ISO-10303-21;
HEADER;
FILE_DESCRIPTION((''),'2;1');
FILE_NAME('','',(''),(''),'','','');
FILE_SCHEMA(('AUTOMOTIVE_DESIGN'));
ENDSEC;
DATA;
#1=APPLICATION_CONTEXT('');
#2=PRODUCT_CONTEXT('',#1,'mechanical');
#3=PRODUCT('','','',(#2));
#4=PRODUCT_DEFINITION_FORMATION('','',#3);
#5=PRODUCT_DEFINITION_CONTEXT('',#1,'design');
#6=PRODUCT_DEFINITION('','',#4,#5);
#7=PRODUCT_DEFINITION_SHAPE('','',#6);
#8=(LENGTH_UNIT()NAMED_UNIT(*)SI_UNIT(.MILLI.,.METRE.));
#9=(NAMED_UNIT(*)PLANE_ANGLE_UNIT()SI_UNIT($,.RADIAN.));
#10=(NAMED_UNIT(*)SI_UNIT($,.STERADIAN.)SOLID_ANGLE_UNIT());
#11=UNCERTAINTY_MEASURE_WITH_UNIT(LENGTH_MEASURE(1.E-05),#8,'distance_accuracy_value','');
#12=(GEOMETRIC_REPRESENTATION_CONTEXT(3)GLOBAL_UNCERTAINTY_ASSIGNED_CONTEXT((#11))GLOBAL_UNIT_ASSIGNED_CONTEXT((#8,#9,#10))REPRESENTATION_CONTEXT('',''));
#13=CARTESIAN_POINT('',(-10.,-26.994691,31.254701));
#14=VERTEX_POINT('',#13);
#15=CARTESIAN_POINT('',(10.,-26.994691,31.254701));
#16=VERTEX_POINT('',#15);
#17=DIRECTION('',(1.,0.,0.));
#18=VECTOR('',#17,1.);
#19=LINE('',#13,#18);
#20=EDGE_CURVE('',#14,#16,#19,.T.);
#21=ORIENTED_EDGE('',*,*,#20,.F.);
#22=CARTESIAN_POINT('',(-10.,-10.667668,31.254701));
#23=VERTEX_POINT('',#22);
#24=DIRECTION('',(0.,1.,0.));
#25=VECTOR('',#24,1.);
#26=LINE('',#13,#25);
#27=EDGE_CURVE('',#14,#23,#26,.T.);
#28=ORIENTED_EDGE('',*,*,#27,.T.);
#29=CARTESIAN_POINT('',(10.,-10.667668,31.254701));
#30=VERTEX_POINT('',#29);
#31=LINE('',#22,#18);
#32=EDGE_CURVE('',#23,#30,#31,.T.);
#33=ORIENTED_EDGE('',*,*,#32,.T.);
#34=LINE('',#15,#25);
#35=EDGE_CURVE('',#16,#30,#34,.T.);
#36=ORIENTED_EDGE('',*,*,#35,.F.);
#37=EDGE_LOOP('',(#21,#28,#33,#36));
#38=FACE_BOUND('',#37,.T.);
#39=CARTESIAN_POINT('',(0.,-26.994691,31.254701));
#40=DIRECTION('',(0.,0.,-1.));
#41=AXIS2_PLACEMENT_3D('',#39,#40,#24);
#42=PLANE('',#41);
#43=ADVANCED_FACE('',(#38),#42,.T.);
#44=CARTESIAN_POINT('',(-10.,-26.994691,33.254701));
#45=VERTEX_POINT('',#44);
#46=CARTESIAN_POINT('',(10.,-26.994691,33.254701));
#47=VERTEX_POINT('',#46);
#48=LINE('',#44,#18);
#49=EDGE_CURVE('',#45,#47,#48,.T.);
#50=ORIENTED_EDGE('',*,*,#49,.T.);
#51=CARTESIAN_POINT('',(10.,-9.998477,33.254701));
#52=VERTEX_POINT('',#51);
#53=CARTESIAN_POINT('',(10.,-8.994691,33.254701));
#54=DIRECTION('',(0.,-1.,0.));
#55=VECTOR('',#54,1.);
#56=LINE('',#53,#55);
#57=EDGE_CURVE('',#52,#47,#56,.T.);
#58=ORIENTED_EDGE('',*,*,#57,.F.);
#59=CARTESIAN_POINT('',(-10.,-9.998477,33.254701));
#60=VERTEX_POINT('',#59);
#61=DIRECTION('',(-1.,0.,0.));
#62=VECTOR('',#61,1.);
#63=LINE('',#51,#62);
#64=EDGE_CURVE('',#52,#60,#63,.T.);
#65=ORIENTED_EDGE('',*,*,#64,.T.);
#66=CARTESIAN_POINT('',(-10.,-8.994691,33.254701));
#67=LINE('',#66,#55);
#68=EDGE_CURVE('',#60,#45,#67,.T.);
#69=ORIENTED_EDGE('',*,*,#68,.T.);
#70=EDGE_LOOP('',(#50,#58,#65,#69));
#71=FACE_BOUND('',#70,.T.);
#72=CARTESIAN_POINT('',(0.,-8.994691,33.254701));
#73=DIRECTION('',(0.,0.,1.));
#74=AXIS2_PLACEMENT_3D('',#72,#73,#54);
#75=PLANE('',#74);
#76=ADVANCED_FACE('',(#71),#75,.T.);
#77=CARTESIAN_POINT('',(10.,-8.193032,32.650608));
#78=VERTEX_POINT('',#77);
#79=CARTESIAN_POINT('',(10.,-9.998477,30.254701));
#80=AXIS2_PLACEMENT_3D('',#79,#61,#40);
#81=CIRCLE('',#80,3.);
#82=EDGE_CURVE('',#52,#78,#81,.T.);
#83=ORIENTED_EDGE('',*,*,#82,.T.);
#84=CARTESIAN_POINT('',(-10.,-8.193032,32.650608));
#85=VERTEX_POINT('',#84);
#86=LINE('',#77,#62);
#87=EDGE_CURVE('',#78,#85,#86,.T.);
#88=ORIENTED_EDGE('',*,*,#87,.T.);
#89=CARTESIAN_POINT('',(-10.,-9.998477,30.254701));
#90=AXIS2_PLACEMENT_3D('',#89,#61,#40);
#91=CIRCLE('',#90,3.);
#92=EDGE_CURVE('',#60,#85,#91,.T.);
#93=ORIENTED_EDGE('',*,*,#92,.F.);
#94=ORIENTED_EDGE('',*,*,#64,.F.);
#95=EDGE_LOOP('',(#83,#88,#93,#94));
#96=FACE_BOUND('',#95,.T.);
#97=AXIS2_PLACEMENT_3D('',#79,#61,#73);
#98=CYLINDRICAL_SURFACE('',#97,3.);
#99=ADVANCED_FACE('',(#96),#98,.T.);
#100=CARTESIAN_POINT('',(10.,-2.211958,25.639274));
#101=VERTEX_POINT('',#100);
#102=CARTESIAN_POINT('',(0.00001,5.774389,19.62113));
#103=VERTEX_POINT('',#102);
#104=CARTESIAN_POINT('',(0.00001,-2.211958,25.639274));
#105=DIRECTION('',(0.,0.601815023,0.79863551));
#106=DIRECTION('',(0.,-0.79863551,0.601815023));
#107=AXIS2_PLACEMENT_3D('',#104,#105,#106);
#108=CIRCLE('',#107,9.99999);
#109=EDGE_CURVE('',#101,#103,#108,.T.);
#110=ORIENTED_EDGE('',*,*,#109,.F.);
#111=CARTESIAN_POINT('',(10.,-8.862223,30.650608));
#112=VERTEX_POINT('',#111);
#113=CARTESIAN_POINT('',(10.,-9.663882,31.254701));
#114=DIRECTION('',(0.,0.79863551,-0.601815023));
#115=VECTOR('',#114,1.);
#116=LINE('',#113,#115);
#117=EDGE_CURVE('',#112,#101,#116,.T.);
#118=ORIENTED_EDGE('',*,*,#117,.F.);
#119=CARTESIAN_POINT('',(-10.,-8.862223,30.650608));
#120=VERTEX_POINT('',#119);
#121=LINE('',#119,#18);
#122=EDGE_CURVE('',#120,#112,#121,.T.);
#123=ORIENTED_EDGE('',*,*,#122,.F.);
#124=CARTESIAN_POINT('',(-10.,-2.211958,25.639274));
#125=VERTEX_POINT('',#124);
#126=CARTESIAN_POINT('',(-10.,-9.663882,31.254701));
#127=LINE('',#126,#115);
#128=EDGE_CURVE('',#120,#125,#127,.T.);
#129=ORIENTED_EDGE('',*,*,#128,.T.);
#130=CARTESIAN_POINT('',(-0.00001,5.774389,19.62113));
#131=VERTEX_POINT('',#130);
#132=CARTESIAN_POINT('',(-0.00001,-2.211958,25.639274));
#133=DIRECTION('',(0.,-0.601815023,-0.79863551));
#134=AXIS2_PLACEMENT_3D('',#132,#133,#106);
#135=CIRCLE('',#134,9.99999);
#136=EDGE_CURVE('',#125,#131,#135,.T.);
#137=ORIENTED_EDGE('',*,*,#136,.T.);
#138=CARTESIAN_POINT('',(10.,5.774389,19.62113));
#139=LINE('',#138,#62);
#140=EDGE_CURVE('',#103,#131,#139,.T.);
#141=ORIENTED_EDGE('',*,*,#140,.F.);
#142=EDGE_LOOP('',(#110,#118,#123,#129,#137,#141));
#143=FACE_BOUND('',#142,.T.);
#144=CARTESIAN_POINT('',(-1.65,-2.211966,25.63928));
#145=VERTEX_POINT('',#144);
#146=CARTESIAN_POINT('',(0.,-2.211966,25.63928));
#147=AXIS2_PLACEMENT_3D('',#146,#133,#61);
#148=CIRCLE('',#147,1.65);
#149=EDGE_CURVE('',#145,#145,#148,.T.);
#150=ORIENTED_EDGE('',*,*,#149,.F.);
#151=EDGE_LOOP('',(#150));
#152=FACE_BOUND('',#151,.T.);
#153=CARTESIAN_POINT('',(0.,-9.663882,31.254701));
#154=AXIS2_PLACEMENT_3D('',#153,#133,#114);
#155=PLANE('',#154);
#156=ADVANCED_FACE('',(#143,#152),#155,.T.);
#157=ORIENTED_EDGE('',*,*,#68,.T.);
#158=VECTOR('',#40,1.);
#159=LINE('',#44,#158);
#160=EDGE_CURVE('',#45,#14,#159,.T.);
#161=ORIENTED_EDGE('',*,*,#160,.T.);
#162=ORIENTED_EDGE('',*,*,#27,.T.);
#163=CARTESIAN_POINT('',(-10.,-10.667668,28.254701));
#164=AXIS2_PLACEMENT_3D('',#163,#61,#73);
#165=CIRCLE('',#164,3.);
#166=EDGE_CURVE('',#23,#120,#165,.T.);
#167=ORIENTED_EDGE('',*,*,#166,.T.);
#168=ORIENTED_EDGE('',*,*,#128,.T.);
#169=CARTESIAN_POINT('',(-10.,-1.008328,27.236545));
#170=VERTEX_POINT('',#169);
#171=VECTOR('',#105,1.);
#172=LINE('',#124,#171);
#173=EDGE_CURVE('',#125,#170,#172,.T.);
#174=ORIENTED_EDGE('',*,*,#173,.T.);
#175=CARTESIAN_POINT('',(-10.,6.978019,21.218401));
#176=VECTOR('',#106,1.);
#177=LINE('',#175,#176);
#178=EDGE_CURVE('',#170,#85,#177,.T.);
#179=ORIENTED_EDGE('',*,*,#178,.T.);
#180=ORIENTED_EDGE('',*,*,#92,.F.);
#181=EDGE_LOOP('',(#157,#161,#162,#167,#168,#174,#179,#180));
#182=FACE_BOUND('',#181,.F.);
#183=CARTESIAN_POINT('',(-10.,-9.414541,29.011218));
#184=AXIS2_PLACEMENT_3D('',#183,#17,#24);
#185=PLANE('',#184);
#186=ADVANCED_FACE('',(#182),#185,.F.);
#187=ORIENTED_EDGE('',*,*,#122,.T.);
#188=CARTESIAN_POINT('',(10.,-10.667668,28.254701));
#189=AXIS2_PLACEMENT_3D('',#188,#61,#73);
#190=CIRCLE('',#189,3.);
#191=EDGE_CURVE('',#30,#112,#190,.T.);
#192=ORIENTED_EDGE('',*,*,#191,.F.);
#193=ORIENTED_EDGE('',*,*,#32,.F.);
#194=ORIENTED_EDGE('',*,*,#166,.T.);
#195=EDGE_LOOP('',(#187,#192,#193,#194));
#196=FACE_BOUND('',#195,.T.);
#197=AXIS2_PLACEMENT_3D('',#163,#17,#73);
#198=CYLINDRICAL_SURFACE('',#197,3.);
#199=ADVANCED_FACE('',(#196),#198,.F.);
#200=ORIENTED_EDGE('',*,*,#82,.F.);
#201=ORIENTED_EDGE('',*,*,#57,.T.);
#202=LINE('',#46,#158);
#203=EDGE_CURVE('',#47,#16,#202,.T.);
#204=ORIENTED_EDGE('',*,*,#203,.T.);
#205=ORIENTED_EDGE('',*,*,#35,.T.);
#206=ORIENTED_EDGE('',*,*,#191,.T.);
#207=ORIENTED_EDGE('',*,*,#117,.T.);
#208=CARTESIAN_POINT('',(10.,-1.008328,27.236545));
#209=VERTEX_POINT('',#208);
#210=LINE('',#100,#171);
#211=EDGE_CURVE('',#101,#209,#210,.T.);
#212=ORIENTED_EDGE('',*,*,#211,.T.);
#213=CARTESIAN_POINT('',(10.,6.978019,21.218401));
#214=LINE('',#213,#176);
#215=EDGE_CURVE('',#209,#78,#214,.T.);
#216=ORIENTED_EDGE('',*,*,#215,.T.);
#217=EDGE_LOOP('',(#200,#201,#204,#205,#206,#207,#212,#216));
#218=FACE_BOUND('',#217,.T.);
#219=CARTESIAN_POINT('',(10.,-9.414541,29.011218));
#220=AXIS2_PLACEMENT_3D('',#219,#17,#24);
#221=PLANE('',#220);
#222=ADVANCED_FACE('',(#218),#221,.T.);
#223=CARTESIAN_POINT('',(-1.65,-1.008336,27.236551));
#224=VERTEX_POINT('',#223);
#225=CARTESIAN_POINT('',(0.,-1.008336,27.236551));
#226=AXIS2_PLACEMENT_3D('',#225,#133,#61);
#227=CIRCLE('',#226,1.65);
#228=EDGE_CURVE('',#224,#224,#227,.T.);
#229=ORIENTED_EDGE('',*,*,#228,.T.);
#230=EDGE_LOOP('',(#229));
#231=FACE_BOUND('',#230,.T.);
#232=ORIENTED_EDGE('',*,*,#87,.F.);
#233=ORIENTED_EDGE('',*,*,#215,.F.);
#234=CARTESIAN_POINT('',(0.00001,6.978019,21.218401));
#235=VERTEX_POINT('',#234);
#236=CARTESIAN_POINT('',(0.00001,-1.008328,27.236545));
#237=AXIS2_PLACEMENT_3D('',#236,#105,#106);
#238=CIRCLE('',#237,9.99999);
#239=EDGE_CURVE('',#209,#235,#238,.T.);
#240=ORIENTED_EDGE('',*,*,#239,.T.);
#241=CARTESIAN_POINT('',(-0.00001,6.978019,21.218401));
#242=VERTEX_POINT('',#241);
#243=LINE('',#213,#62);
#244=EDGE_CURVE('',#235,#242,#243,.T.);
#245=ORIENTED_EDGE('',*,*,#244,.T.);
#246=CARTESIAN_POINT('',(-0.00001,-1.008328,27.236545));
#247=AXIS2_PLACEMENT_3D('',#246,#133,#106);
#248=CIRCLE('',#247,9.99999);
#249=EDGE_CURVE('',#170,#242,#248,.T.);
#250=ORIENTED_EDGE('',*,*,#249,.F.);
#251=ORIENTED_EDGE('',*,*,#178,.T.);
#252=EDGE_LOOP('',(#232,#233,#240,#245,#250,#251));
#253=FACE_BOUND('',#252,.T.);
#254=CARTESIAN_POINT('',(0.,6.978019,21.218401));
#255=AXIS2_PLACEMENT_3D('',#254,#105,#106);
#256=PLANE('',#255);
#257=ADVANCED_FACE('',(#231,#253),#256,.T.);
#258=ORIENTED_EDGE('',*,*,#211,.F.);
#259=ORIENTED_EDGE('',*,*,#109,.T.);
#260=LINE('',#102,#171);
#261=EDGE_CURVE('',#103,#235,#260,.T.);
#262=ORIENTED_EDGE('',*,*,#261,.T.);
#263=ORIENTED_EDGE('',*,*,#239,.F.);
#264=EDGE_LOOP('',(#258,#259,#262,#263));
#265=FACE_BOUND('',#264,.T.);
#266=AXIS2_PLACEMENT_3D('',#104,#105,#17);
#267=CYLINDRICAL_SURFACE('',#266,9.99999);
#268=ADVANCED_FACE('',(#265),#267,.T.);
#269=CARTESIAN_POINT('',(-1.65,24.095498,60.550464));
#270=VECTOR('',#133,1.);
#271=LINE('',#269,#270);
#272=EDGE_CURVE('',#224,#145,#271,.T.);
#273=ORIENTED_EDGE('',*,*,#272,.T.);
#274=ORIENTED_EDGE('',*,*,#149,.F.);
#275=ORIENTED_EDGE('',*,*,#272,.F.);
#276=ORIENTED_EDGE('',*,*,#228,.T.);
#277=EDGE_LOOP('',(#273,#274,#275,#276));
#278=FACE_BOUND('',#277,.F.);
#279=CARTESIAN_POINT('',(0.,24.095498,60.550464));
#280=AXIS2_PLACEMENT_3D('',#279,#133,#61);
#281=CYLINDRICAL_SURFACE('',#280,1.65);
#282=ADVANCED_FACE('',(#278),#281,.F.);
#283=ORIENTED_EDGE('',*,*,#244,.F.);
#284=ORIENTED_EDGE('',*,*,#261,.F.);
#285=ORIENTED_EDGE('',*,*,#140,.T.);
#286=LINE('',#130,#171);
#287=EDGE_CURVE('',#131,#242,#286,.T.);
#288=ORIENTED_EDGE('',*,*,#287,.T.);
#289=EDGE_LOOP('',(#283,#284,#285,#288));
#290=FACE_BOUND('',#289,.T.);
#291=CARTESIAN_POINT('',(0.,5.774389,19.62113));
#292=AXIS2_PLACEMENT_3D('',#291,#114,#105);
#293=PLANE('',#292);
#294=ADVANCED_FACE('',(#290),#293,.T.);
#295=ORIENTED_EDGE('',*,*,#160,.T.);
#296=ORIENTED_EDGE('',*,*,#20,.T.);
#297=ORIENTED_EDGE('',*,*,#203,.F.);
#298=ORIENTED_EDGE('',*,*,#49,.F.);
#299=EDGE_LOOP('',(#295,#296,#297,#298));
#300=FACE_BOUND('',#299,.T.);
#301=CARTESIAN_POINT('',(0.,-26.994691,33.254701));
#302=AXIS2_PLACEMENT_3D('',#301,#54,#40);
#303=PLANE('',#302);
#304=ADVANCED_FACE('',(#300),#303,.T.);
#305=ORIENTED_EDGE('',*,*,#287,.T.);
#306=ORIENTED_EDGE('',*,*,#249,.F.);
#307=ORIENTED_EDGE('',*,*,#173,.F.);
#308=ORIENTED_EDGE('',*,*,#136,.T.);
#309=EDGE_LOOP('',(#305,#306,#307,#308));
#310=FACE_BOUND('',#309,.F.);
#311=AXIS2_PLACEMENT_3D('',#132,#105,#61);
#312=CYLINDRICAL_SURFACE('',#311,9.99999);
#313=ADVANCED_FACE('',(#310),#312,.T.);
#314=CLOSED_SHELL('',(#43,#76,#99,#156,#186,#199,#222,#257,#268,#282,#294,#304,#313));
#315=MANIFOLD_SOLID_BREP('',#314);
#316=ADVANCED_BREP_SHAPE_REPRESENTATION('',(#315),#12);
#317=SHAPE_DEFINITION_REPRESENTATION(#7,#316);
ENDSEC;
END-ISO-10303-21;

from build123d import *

# Parameters (mm, degrees)
F1_DEPTH = 10
F3_D     = 3.3
F4_R     = 3
F5_R     = 9.99999


# Not quite as in the source:
# - a fillet or chamfer is up to 0.001 mm smaller than in the source, because OpenCascade refuses the exact size


with BuildPart() as f1:
    # F0 (on Right) → F1 (new body, symmetric)
    with BuildSketch(Plane.YZ):
        Polygon((-8.9946911595, 33.2547011177), (-26.9946911595, 33.2547011177), (-26.9946911595, 31.2547011177), (-9.6638817985, 31.2547011177), (5.7743889952, 19.6211296345), (6.9780190415, 21.2184006546), align=None)
    extrude(amount=F1_DEPTH, both=True)

    # F3 (through all)
    with Locations(Plane(origin=(0, 12.7255260612, 16.8873434619), x_dir=(1, 0, 0), z_dir=(0, 0.6018150232, 0.79863551))):
        with Locations((0, -17.1966584849)):
            Hole(F3_D / 2)

    # F4
    f4_edges = [f1.edges().sort_by_distance(p)[0] for p in [
        (0, -8.994691, 33.254701),
        (0, -9.663882, 31.254701),
    ]]
    fillet(f4_edges, radius=F4_R)

    # F5 (radius 10 in the source; OpenCascade refuses exactly that, so slightly less here)
    f5_edges = [f1.edges().sort_by_distance(p)[0] for p in [
        (10, 6.376204, 20.419765),
        (-10, 6.376204, 20.419765),
    ]]
    fillet(f5_edges, radius=F5_R)


solid = f1.part
